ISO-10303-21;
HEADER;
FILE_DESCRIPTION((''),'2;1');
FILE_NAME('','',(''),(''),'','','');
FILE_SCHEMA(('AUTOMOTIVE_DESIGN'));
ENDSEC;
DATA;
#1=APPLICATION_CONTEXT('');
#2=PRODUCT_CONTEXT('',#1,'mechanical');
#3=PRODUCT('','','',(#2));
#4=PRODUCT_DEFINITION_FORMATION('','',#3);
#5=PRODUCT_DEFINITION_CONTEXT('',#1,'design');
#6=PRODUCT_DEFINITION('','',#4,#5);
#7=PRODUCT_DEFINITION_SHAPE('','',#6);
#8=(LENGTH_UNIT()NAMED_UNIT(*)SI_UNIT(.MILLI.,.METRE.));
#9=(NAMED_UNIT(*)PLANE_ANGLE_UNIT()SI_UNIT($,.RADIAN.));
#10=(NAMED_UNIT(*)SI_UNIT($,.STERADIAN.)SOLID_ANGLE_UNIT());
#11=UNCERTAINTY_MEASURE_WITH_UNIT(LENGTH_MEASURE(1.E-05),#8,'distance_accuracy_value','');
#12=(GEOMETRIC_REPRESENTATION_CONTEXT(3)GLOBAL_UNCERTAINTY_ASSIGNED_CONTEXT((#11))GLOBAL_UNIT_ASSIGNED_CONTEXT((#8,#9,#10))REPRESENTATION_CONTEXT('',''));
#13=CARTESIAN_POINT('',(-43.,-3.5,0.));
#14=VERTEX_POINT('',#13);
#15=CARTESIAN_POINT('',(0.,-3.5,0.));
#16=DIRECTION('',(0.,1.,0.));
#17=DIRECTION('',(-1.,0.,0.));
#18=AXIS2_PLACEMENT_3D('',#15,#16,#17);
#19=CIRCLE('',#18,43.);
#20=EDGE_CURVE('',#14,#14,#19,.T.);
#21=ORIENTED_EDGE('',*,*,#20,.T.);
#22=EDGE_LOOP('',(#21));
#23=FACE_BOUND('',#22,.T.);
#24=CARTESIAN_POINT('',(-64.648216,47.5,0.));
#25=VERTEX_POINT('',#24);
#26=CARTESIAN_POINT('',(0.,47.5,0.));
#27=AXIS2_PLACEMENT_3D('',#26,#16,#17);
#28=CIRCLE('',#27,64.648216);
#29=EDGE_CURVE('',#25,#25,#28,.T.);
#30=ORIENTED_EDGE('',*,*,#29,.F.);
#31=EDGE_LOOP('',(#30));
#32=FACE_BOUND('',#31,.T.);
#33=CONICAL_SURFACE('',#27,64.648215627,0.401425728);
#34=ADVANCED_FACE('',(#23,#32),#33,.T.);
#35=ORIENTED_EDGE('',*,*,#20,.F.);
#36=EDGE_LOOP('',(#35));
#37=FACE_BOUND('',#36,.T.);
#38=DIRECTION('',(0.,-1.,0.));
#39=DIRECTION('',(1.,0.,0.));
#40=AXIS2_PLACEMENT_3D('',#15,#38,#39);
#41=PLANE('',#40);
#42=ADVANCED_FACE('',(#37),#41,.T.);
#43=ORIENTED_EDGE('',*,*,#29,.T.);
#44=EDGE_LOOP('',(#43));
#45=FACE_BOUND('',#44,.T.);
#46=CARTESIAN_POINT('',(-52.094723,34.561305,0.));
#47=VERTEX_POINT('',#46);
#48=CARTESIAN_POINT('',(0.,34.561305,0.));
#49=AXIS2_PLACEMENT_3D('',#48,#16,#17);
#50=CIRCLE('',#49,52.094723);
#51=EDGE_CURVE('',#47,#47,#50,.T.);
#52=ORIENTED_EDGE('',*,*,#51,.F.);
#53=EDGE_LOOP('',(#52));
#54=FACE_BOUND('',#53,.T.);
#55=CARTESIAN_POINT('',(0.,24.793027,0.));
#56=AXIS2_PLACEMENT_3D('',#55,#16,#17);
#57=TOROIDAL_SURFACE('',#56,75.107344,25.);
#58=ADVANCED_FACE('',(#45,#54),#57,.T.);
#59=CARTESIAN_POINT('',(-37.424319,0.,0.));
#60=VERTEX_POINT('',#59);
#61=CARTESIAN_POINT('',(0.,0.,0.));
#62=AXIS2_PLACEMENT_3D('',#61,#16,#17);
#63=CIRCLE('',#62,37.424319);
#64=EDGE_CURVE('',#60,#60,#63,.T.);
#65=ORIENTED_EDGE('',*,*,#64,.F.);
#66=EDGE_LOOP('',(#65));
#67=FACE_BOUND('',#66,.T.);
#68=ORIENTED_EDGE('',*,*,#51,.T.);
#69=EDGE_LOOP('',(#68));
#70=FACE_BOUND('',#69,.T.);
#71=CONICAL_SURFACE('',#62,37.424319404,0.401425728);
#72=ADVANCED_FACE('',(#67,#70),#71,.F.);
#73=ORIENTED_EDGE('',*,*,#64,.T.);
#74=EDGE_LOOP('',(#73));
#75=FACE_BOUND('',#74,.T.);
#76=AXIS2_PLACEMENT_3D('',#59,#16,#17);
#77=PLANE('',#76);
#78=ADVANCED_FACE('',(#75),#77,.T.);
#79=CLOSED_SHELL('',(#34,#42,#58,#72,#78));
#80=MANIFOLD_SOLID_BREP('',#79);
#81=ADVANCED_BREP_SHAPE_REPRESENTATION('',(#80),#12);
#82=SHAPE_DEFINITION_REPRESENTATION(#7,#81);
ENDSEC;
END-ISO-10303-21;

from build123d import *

# Parameters (mm, degrees)
FILLET2_R = 25


with BuildPart() as part:
    # Sketch1 → Revolve1 (revolve)
    with BuildSketch(Plane.XY):
        Polygon((0, 0), (0, -3.5), (-43, -3.5), (-64.648215627, 47.5), (-57.586873174, 47.5), (-37.424319404, 0), align=None)
    revolve(axis=Axis((0, -36.803347039, 0), (0, -1, 0)))

    # Fillet2
    # the kernel refuses this fillet: 25 mm, written as the material it takes off along each edge
    with BuildSketch(Plane(origin=(0, 47.5, 0), x_dir=(-1, 0, 0), z_dir=(0, 0, 1))) as fillet2_piece_1:
        with BuildLine():
            CenterArc((75.107344393, 22.706973058), FILLET2_R, 203, 42.26858443)
            Line((52.094723057, 12.938694845), (51.63447063, 12.743329281))
            Line((51.63447063, 12.743329281), (57.126620747, -0.195365564))
            Line((57.126620747, -0.195365564), (57.586873174, -0.5))
            ThreePointArc((57.586873174, -0.5), (61.1175444, -0.5), (64.439033051, -0.454139461))
            Line((64.439033051, -0.454139461), (64.648215627, 0))
        make_face()
    revolve(axis=Axis((0, 47.5, 0), (0, -1, 0)), mode=Mode.SUBTRACT)


solid = part.part
